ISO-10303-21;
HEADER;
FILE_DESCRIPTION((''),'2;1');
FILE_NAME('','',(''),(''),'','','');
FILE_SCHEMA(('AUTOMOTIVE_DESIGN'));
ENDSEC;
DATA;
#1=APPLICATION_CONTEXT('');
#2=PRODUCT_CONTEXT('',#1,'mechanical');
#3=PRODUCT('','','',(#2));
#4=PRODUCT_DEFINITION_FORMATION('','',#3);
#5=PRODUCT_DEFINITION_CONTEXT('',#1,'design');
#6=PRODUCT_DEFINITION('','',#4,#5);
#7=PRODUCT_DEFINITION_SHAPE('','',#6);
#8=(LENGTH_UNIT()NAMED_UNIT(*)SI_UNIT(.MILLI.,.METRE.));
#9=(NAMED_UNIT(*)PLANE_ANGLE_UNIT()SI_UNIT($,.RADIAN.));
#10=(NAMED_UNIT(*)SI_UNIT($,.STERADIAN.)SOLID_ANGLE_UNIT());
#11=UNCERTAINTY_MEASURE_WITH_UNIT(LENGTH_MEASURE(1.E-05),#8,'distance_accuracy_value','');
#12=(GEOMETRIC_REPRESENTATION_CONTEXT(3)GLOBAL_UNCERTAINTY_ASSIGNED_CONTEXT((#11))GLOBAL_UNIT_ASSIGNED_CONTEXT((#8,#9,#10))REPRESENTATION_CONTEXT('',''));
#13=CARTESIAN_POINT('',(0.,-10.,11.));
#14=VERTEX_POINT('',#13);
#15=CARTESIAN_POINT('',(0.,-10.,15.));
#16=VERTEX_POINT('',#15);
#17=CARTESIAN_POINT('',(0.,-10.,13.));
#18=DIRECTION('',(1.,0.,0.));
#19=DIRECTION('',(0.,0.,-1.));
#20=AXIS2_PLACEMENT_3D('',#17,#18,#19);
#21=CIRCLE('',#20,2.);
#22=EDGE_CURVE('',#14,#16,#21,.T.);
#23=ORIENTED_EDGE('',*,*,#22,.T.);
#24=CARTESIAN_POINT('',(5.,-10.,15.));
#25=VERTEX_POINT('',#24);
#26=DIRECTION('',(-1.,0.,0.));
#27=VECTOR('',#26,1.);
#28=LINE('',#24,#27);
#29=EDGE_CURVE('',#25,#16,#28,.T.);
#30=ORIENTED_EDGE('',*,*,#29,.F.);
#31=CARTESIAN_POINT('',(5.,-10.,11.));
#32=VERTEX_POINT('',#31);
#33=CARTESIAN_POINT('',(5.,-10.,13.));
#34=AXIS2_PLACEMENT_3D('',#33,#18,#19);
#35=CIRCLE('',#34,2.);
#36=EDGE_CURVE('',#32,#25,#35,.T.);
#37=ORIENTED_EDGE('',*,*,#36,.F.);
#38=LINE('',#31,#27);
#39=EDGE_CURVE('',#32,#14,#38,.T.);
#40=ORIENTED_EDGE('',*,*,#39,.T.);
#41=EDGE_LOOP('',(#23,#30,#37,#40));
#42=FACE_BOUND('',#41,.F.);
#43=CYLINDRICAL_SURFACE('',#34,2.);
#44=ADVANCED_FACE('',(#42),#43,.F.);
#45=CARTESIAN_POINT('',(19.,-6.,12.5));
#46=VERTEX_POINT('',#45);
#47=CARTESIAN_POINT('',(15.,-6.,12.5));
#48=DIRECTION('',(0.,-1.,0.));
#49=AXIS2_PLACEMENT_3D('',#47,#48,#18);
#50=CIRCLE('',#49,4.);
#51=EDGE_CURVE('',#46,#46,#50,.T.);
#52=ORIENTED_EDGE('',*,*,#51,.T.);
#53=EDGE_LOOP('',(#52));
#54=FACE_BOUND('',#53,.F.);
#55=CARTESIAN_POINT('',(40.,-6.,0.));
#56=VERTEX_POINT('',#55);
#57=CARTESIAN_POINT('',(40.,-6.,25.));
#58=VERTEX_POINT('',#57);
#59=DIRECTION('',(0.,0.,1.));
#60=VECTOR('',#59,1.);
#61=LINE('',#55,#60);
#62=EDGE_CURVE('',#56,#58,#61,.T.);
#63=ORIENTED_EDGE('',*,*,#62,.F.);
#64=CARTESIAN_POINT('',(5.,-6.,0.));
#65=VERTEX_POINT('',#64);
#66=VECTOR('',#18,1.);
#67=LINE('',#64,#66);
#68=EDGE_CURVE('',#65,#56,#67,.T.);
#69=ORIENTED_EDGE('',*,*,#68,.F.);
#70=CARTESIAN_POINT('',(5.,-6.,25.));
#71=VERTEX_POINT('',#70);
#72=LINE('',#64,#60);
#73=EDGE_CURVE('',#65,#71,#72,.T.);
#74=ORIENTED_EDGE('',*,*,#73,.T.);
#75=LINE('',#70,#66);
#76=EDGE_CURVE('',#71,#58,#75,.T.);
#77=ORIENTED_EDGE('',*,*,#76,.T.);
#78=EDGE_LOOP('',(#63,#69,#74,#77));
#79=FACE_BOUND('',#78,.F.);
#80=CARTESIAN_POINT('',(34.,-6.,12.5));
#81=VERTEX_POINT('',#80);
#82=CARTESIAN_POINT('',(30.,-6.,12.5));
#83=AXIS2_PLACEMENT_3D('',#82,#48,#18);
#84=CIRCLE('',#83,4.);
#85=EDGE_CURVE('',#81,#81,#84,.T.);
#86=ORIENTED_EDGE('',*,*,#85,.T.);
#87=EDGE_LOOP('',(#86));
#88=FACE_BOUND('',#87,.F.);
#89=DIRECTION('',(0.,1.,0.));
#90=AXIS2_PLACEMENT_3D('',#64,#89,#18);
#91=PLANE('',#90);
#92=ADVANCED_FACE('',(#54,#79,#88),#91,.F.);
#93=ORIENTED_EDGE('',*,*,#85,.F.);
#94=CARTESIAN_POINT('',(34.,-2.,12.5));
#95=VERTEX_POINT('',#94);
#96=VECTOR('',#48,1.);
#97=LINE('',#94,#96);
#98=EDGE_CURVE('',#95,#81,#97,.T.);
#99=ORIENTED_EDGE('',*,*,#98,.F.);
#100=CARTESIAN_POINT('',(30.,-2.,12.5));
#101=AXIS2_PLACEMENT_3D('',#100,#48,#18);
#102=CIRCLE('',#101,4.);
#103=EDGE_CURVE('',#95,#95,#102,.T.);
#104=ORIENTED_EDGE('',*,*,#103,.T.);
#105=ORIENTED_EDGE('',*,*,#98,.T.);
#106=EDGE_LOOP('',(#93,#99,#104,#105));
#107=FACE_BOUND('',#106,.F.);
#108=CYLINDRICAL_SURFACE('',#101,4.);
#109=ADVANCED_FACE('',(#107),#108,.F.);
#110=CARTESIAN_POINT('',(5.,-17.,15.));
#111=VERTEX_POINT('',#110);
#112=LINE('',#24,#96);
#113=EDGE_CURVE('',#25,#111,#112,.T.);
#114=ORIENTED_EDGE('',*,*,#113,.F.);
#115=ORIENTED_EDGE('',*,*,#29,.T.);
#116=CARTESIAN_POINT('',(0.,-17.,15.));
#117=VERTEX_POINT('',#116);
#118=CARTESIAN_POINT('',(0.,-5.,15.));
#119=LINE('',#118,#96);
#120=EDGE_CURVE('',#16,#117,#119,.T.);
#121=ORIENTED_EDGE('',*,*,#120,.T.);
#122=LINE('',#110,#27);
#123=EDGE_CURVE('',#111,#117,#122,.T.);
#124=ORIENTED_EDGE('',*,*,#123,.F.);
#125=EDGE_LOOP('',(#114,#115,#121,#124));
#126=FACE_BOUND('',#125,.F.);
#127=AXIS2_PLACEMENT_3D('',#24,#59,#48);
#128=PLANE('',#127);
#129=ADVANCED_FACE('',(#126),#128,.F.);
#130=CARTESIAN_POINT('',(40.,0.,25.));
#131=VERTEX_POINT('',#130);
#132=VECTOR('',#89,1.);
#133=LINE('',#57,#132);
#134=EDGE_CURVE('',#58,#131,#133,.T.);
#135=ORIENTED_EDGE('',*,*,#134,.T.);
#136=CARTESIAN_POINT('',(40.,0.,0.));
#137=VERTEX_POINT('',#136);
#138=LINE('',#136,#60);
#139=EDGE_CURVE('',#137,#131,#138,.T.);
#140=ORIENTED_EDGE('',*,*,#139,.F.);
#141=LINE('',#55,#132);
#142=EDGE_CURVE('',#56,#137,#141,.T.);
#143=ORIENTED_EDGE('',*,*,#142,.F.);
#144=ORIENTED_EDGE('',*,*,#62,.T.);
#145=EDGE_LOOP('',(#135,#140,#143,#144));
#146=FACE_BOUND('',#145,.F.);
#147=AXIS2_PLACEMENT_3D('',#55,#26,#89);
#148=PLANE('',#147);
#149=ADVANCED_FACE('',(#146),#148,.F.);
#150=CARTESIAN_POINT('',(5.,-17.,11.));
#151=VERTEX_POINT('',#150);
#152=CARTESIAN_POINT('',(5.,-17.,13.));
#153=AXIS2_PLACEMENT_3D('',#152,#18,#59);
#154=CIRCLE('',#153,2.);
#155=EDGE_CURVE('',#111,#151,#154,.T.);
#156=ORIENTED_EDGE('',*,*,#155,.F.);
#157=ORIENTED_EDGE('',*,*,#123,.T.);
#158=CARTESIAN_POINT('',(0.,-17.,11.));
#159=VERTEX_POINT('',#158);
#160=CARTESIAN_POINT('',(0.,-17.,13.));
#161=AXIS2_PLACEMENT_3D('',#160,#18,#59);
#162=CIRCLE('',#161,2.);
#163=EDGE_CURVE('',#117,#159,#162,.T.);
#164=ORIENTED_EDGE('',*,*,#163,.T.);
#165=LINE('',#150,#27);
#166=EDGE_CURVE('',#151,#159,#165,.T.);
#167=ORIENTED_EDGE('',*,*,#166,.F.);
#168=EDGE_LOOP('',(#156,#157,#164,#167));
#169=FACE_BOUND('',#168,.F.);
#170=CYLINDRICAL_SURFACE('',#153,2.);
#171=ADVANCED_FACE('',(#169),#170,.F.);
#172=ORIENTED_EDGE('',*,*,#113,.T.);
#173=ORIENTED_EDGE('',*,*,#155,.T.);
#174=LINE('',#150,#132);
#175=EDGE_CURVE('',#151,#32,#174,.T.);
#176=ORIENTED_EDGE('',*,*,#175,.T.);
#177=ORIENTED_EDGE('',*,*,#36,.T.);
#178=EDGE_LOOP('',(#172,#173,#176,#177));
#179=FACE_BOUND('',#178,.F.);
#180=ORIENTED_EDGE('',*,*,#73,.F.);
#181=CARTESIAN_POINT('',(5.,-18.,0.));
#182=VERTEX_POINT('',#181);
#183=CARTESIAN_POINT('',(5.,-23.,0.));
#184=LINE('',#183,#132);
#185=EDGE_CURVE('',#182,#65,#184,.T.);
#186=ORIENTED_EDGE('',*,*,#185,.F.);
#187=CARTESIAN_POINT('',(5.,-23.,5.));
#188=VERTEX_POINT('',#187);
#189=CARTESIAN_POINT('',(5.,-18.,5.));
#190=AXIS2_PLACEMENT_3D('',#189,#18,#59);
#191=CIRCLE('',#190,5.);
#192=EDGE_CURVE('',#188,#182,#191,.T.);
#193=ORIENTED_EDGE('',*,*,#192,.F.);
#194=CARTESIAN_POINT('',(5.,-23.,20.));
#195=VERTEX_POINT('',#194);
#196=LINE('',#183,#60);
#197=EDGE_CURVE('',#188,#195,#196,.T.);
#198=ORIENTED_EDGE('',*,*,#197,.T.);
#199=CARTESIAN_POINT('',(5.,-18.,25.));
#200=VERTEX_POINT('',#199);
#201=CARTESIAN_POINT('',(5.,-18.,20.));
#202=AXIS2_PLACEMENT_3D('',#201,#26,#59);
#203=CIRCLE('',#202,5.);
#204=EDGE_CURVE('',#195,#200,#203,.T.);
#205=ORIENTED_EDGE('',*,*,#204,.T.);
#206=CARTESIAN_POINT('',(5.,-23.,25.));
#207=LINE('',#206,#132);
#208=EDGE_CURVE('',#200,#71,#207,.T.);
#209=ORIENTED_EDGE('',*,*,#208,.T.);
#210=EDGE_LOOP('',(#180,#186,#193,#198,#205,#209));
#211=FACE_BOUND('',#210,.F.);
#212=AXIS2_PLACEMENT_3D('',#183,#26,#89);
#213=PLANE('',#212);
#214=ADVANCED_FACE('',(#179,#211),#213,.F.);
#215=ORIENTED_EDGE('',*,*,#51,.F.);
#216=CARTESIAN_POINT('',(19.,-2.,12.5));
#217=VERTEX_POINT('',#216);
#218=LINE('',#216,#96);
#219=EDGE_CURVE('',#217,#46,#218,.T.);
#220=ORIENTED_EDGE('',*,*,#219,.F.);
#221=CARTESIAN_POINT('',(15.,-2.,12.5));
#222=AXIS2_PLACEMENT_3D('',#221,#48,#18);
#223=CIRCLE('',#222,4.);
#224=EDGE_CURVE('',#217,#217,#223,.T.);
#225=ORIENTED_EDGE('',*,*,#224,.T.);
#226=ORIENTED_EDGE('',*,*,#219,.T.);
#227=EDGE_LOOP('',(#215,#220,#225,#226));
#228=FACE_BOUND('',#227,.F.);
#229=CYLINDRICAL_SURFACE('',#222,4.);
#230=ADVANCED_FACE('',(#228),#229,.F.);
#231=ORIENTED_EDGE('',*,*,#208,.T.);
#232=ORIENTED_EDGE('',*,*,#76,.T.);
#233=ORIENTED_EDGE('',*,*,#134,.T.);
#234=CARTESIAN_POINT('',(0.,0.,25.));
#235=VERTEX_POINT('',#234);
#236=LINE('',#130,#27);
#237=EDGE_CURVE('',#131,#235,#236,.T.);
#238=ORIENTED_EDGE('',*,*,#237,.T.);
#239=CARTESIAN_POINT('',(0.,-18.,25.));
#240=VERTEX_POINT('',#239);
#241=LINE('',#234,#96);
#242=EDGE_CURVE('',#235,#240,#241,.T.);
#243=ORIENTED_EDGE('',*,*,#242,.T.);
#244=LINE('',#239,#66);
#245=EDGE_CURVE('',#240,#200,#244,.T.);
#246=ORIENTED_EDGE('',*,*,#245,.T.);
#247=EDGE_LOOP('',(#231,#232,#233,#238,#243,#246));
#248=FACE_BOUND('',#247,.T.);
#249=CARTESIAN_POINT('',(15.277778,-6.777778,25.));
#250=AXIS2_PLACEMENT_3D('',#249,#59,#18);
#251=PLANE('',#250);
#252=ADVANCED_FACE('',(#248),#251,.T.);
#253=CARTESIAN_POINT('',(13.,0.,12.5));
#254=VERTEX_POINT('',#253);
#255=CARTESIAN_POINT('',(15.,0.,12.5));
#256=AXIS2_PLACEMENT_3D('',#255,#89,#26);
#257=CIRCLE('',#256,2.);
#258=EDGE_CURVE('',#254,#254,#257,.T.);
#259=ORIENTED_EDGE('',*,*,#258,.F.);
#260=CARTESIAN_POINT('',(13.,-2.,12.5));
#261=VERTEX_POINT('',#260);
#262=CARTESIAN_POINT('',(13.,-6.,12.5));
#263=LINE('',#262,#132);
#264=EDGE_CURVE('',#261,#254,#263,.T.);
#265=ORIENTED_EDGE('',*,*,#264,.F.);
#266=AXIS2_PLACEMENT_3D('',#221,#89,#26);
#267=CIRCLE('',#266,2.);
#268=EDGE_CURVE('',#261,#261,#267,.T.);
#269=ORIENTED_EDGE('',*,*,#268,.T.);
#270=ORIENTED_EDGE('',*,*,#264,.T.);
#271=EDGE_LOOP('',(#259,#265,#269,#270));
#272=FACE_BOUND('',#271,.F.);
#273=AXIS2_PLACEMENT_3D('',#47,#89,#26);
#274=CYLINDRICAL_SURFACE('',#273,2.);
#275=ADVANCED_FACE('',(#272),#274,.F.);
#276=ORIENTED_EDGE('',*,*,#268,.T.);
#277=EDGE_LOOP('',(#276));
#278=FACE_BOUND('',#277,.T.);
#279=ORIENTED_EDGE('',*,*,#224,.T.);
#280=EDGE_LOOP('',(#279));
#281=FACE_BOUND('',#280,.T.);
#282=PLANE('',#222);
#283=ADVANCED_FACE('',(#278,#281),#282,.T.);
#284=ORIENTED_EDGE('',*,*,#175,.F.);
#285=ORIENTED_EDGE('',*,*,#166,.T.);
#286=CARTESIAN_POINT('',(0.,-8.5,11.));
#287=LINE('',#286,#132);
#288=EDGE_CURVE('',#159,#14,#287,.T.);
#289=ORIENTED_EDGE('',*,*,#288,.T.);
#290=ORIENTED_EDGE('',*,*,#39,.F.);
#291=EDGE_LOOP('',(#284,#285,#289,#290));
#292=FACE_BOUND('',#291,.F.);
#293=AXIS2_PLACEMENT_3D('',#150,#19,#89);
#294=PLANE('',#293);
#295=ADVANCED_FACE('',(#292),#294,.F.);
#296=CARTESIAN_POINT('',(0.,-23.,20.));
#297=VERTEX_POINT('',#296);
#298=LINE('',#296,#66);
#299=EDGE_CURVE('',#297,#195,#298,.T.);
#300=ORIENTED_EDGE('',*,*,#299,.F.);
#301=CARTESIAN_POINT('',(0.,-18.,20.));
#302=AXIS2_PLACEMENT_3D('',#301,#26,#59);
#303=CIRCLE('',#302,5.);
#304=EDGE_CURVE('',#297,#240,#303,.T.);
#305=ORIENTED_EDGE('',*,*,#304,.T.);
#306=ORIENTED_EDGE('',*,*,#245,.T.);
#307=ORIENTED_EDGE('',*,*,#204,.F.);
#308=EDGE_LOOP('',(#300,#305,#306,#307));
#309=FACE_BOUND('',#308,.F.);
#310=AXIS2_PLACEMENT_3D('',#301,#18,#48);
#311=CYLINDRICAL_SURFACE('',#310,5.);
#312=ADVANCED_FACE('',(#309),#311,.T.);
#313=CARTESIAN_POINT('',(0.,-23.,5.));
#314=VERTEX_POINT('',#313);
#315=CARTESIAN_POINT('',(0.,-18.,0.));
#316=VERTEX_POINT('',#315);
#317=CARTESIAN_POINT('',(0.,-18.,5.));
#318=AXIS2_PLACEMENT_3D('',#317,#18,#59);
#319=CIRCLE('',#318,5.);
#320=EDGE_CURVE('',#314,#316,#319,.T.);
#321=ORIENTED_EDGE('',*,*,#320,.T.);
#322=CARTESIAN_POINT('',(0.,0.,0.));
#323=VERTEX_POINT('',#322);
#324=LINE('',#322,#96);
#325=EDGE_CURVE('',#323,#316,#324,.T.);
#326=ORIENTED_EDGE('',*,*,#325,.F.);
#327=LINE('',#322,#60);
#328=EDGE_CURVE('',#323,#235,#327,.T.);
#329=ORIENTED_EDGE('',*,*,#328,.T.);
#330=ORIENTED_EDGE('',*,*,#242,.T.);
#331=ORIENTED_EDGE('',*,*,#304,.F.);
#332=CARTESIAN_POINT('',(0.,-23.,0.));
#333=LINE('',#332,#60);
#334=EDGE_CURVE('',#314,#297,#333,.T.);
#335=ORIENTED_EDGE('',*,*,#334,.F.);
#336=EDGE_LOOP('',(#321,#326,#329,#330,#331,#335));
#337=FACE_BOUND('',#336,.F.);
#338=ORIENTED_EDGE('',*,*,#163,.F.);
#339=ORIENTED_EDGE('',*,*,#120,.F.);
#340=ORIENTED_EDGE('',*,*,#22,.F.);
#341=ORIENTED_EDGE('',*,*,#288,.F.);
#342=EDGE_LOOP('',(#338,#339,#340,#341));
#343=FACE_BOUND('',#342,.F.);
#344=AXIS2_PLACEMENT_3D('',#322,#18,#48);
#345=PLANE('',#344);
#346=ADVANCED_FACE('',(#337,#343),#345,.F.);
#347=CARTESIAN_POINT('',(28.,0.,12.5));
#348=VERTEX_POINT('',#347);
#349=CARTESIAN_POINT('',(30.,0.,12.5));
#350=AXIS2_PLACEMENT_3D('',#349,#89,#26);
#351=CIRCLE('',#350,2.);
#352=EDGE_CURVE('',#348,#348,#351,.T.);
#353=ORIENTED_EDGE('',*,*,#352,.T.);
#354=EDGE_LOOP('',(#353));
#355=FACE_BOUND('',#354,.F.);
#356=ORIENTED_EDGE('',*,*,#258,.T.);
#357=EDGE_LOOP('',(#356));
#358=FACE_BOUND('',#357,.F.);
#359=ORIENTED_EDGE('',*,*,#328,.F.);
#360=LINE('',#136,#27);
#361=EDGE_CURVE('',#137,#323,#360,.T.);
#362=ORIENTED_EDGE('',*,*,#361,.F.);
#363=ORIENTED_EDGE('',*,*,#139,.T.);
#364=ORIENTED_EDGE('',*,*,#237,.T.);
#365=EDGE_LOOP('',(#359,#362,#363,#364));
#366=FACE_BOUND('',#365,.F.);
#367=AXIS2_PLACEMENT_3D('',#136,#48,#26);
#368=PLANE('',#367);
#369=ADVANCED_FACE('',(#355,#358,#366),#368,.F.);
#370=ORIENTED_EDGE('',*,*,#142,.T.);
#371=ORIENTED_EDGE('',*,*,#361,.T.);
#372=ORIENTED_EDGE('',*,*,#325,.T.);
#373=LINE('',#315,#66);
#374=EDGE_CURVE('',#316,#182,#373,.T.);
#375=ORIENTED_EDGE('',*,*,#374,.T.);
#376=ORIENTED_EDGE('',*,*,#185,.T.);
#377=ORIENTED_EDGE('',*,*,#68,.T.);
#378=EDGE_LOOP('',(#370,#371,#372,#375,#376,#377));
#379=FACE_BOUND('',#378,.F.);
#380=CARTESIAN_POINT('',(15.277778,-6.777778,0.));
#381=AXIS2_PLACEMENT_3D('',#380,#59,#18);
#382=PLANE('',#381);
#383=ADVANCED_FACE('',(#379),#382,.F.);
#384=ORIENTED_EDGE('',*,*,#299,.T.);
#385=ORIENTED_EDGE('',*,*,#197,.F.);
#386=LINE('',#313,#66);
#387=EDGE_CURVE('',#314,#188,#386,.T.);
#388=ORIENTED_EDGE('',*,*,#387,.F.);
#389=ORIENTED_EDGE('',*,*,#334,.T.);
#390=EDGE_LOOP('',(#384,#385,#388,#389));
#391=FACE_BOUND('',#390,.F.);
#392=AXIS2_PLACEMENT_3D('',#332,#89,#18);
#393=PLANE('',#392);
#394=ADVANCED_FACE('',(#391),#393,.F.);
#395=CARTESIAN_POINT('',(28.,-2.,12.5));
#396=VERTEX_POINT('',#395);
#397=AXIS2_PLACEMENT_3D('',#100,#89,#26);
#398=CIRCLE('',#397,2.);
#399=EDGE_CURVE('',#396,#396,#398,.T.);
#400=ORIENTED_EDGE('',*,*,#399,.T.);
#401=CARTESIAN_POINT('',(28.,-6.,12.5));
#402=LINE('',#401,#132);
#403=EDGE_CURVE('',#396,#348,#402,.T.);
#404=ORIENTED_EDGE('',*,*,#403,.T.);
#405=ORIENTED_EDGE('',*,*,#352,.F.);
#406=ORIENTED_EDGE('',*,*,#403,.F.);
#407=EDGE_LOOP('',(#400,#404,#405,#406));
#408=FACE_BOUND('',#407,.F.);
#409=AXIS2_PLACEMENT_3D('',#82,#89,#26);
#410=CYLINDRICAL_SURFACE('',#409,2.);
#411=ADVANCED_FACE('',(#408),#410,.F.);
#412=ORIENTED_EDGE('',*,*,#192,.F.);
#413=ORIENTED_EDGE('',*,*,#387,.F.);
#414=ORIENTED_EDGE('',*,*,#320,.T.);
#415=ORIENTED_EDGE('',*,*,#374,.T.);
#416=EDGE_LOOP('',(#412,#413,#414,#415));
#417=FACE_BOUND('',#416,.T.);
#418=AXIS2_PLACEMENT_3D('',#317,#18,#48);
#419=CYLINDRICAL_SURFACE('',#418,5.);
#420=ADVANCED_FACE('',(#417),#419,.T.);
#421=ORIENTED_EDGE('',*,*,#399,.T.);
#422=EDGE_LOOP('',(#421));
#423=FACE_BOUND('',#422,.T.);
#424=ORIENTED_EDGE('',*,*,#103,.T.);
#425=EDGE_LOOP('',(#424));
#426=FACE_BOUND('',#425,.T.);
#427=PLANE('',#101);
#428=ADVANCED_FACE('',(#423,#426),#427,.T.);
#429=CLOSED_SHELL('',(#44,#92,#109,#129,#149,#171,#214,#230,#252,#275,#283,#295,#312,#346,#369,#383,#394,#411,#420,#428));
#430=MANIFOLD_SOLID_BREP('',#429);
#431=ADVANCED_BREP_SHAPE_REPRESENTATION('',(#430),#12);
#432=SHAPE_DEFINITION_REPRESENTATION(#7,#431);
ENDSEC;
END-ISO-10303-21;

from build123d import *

# Parameters (mm, degrees)
F1_DEPTH       = 25
F2_R           = 5
F4_DEPTH       = 5.001
F6_D           = 4
F6_CBORE_D     = 8
F6_CBORE_DEPTH = 4


# Not quite as in the source:
# - a feature names something its author has since deleted; it is built from what else it names


with BuildPart() as f1:
    # F0 (on Top) → F1 (new body)
    with BuildSketch(Plane.XY):
        Polygon((0, 0), (0, -23), (5, -23), (5, -6), (40, -6), (40, 0), align=None)
    extrude(amount=F1_DEPTH)

    # F2
    f2_edges = [f1.edges().sort_by_distance(p)[0] for p in [
        (2.5, -23, 0),
        (2.5, -23, 25),
    ]]
    fillet(f2_edges, radius=F2_R)

    # F3 (on face) → F4 (cut, through all)
    with BuildSketch(Plane.YZ.offset(5)):
        with BuildLine():
            ThreePointArc((-17, 15), (-19, 13), (-17, 11))
            Line((-17, 11), (-10, 11))
            ThreePointArc((-10, 11), (-8, 13), (-10, 15))
            Line((-10, 15), (-17, 15))
        make_face()
    extrude(amount=-F4_DEPTH, mode=Mode.SUBTRACT)

    # F6 (through all)
    with Locations(Plane.XZ.offset(6)):
        with Locations((30, 12.5), (15, 12.5)):
            CounterBoreHole(F6_D / 2, F6_CBORE_D / 2, F6_CBORE_DEPTH)


solid = f1.part
